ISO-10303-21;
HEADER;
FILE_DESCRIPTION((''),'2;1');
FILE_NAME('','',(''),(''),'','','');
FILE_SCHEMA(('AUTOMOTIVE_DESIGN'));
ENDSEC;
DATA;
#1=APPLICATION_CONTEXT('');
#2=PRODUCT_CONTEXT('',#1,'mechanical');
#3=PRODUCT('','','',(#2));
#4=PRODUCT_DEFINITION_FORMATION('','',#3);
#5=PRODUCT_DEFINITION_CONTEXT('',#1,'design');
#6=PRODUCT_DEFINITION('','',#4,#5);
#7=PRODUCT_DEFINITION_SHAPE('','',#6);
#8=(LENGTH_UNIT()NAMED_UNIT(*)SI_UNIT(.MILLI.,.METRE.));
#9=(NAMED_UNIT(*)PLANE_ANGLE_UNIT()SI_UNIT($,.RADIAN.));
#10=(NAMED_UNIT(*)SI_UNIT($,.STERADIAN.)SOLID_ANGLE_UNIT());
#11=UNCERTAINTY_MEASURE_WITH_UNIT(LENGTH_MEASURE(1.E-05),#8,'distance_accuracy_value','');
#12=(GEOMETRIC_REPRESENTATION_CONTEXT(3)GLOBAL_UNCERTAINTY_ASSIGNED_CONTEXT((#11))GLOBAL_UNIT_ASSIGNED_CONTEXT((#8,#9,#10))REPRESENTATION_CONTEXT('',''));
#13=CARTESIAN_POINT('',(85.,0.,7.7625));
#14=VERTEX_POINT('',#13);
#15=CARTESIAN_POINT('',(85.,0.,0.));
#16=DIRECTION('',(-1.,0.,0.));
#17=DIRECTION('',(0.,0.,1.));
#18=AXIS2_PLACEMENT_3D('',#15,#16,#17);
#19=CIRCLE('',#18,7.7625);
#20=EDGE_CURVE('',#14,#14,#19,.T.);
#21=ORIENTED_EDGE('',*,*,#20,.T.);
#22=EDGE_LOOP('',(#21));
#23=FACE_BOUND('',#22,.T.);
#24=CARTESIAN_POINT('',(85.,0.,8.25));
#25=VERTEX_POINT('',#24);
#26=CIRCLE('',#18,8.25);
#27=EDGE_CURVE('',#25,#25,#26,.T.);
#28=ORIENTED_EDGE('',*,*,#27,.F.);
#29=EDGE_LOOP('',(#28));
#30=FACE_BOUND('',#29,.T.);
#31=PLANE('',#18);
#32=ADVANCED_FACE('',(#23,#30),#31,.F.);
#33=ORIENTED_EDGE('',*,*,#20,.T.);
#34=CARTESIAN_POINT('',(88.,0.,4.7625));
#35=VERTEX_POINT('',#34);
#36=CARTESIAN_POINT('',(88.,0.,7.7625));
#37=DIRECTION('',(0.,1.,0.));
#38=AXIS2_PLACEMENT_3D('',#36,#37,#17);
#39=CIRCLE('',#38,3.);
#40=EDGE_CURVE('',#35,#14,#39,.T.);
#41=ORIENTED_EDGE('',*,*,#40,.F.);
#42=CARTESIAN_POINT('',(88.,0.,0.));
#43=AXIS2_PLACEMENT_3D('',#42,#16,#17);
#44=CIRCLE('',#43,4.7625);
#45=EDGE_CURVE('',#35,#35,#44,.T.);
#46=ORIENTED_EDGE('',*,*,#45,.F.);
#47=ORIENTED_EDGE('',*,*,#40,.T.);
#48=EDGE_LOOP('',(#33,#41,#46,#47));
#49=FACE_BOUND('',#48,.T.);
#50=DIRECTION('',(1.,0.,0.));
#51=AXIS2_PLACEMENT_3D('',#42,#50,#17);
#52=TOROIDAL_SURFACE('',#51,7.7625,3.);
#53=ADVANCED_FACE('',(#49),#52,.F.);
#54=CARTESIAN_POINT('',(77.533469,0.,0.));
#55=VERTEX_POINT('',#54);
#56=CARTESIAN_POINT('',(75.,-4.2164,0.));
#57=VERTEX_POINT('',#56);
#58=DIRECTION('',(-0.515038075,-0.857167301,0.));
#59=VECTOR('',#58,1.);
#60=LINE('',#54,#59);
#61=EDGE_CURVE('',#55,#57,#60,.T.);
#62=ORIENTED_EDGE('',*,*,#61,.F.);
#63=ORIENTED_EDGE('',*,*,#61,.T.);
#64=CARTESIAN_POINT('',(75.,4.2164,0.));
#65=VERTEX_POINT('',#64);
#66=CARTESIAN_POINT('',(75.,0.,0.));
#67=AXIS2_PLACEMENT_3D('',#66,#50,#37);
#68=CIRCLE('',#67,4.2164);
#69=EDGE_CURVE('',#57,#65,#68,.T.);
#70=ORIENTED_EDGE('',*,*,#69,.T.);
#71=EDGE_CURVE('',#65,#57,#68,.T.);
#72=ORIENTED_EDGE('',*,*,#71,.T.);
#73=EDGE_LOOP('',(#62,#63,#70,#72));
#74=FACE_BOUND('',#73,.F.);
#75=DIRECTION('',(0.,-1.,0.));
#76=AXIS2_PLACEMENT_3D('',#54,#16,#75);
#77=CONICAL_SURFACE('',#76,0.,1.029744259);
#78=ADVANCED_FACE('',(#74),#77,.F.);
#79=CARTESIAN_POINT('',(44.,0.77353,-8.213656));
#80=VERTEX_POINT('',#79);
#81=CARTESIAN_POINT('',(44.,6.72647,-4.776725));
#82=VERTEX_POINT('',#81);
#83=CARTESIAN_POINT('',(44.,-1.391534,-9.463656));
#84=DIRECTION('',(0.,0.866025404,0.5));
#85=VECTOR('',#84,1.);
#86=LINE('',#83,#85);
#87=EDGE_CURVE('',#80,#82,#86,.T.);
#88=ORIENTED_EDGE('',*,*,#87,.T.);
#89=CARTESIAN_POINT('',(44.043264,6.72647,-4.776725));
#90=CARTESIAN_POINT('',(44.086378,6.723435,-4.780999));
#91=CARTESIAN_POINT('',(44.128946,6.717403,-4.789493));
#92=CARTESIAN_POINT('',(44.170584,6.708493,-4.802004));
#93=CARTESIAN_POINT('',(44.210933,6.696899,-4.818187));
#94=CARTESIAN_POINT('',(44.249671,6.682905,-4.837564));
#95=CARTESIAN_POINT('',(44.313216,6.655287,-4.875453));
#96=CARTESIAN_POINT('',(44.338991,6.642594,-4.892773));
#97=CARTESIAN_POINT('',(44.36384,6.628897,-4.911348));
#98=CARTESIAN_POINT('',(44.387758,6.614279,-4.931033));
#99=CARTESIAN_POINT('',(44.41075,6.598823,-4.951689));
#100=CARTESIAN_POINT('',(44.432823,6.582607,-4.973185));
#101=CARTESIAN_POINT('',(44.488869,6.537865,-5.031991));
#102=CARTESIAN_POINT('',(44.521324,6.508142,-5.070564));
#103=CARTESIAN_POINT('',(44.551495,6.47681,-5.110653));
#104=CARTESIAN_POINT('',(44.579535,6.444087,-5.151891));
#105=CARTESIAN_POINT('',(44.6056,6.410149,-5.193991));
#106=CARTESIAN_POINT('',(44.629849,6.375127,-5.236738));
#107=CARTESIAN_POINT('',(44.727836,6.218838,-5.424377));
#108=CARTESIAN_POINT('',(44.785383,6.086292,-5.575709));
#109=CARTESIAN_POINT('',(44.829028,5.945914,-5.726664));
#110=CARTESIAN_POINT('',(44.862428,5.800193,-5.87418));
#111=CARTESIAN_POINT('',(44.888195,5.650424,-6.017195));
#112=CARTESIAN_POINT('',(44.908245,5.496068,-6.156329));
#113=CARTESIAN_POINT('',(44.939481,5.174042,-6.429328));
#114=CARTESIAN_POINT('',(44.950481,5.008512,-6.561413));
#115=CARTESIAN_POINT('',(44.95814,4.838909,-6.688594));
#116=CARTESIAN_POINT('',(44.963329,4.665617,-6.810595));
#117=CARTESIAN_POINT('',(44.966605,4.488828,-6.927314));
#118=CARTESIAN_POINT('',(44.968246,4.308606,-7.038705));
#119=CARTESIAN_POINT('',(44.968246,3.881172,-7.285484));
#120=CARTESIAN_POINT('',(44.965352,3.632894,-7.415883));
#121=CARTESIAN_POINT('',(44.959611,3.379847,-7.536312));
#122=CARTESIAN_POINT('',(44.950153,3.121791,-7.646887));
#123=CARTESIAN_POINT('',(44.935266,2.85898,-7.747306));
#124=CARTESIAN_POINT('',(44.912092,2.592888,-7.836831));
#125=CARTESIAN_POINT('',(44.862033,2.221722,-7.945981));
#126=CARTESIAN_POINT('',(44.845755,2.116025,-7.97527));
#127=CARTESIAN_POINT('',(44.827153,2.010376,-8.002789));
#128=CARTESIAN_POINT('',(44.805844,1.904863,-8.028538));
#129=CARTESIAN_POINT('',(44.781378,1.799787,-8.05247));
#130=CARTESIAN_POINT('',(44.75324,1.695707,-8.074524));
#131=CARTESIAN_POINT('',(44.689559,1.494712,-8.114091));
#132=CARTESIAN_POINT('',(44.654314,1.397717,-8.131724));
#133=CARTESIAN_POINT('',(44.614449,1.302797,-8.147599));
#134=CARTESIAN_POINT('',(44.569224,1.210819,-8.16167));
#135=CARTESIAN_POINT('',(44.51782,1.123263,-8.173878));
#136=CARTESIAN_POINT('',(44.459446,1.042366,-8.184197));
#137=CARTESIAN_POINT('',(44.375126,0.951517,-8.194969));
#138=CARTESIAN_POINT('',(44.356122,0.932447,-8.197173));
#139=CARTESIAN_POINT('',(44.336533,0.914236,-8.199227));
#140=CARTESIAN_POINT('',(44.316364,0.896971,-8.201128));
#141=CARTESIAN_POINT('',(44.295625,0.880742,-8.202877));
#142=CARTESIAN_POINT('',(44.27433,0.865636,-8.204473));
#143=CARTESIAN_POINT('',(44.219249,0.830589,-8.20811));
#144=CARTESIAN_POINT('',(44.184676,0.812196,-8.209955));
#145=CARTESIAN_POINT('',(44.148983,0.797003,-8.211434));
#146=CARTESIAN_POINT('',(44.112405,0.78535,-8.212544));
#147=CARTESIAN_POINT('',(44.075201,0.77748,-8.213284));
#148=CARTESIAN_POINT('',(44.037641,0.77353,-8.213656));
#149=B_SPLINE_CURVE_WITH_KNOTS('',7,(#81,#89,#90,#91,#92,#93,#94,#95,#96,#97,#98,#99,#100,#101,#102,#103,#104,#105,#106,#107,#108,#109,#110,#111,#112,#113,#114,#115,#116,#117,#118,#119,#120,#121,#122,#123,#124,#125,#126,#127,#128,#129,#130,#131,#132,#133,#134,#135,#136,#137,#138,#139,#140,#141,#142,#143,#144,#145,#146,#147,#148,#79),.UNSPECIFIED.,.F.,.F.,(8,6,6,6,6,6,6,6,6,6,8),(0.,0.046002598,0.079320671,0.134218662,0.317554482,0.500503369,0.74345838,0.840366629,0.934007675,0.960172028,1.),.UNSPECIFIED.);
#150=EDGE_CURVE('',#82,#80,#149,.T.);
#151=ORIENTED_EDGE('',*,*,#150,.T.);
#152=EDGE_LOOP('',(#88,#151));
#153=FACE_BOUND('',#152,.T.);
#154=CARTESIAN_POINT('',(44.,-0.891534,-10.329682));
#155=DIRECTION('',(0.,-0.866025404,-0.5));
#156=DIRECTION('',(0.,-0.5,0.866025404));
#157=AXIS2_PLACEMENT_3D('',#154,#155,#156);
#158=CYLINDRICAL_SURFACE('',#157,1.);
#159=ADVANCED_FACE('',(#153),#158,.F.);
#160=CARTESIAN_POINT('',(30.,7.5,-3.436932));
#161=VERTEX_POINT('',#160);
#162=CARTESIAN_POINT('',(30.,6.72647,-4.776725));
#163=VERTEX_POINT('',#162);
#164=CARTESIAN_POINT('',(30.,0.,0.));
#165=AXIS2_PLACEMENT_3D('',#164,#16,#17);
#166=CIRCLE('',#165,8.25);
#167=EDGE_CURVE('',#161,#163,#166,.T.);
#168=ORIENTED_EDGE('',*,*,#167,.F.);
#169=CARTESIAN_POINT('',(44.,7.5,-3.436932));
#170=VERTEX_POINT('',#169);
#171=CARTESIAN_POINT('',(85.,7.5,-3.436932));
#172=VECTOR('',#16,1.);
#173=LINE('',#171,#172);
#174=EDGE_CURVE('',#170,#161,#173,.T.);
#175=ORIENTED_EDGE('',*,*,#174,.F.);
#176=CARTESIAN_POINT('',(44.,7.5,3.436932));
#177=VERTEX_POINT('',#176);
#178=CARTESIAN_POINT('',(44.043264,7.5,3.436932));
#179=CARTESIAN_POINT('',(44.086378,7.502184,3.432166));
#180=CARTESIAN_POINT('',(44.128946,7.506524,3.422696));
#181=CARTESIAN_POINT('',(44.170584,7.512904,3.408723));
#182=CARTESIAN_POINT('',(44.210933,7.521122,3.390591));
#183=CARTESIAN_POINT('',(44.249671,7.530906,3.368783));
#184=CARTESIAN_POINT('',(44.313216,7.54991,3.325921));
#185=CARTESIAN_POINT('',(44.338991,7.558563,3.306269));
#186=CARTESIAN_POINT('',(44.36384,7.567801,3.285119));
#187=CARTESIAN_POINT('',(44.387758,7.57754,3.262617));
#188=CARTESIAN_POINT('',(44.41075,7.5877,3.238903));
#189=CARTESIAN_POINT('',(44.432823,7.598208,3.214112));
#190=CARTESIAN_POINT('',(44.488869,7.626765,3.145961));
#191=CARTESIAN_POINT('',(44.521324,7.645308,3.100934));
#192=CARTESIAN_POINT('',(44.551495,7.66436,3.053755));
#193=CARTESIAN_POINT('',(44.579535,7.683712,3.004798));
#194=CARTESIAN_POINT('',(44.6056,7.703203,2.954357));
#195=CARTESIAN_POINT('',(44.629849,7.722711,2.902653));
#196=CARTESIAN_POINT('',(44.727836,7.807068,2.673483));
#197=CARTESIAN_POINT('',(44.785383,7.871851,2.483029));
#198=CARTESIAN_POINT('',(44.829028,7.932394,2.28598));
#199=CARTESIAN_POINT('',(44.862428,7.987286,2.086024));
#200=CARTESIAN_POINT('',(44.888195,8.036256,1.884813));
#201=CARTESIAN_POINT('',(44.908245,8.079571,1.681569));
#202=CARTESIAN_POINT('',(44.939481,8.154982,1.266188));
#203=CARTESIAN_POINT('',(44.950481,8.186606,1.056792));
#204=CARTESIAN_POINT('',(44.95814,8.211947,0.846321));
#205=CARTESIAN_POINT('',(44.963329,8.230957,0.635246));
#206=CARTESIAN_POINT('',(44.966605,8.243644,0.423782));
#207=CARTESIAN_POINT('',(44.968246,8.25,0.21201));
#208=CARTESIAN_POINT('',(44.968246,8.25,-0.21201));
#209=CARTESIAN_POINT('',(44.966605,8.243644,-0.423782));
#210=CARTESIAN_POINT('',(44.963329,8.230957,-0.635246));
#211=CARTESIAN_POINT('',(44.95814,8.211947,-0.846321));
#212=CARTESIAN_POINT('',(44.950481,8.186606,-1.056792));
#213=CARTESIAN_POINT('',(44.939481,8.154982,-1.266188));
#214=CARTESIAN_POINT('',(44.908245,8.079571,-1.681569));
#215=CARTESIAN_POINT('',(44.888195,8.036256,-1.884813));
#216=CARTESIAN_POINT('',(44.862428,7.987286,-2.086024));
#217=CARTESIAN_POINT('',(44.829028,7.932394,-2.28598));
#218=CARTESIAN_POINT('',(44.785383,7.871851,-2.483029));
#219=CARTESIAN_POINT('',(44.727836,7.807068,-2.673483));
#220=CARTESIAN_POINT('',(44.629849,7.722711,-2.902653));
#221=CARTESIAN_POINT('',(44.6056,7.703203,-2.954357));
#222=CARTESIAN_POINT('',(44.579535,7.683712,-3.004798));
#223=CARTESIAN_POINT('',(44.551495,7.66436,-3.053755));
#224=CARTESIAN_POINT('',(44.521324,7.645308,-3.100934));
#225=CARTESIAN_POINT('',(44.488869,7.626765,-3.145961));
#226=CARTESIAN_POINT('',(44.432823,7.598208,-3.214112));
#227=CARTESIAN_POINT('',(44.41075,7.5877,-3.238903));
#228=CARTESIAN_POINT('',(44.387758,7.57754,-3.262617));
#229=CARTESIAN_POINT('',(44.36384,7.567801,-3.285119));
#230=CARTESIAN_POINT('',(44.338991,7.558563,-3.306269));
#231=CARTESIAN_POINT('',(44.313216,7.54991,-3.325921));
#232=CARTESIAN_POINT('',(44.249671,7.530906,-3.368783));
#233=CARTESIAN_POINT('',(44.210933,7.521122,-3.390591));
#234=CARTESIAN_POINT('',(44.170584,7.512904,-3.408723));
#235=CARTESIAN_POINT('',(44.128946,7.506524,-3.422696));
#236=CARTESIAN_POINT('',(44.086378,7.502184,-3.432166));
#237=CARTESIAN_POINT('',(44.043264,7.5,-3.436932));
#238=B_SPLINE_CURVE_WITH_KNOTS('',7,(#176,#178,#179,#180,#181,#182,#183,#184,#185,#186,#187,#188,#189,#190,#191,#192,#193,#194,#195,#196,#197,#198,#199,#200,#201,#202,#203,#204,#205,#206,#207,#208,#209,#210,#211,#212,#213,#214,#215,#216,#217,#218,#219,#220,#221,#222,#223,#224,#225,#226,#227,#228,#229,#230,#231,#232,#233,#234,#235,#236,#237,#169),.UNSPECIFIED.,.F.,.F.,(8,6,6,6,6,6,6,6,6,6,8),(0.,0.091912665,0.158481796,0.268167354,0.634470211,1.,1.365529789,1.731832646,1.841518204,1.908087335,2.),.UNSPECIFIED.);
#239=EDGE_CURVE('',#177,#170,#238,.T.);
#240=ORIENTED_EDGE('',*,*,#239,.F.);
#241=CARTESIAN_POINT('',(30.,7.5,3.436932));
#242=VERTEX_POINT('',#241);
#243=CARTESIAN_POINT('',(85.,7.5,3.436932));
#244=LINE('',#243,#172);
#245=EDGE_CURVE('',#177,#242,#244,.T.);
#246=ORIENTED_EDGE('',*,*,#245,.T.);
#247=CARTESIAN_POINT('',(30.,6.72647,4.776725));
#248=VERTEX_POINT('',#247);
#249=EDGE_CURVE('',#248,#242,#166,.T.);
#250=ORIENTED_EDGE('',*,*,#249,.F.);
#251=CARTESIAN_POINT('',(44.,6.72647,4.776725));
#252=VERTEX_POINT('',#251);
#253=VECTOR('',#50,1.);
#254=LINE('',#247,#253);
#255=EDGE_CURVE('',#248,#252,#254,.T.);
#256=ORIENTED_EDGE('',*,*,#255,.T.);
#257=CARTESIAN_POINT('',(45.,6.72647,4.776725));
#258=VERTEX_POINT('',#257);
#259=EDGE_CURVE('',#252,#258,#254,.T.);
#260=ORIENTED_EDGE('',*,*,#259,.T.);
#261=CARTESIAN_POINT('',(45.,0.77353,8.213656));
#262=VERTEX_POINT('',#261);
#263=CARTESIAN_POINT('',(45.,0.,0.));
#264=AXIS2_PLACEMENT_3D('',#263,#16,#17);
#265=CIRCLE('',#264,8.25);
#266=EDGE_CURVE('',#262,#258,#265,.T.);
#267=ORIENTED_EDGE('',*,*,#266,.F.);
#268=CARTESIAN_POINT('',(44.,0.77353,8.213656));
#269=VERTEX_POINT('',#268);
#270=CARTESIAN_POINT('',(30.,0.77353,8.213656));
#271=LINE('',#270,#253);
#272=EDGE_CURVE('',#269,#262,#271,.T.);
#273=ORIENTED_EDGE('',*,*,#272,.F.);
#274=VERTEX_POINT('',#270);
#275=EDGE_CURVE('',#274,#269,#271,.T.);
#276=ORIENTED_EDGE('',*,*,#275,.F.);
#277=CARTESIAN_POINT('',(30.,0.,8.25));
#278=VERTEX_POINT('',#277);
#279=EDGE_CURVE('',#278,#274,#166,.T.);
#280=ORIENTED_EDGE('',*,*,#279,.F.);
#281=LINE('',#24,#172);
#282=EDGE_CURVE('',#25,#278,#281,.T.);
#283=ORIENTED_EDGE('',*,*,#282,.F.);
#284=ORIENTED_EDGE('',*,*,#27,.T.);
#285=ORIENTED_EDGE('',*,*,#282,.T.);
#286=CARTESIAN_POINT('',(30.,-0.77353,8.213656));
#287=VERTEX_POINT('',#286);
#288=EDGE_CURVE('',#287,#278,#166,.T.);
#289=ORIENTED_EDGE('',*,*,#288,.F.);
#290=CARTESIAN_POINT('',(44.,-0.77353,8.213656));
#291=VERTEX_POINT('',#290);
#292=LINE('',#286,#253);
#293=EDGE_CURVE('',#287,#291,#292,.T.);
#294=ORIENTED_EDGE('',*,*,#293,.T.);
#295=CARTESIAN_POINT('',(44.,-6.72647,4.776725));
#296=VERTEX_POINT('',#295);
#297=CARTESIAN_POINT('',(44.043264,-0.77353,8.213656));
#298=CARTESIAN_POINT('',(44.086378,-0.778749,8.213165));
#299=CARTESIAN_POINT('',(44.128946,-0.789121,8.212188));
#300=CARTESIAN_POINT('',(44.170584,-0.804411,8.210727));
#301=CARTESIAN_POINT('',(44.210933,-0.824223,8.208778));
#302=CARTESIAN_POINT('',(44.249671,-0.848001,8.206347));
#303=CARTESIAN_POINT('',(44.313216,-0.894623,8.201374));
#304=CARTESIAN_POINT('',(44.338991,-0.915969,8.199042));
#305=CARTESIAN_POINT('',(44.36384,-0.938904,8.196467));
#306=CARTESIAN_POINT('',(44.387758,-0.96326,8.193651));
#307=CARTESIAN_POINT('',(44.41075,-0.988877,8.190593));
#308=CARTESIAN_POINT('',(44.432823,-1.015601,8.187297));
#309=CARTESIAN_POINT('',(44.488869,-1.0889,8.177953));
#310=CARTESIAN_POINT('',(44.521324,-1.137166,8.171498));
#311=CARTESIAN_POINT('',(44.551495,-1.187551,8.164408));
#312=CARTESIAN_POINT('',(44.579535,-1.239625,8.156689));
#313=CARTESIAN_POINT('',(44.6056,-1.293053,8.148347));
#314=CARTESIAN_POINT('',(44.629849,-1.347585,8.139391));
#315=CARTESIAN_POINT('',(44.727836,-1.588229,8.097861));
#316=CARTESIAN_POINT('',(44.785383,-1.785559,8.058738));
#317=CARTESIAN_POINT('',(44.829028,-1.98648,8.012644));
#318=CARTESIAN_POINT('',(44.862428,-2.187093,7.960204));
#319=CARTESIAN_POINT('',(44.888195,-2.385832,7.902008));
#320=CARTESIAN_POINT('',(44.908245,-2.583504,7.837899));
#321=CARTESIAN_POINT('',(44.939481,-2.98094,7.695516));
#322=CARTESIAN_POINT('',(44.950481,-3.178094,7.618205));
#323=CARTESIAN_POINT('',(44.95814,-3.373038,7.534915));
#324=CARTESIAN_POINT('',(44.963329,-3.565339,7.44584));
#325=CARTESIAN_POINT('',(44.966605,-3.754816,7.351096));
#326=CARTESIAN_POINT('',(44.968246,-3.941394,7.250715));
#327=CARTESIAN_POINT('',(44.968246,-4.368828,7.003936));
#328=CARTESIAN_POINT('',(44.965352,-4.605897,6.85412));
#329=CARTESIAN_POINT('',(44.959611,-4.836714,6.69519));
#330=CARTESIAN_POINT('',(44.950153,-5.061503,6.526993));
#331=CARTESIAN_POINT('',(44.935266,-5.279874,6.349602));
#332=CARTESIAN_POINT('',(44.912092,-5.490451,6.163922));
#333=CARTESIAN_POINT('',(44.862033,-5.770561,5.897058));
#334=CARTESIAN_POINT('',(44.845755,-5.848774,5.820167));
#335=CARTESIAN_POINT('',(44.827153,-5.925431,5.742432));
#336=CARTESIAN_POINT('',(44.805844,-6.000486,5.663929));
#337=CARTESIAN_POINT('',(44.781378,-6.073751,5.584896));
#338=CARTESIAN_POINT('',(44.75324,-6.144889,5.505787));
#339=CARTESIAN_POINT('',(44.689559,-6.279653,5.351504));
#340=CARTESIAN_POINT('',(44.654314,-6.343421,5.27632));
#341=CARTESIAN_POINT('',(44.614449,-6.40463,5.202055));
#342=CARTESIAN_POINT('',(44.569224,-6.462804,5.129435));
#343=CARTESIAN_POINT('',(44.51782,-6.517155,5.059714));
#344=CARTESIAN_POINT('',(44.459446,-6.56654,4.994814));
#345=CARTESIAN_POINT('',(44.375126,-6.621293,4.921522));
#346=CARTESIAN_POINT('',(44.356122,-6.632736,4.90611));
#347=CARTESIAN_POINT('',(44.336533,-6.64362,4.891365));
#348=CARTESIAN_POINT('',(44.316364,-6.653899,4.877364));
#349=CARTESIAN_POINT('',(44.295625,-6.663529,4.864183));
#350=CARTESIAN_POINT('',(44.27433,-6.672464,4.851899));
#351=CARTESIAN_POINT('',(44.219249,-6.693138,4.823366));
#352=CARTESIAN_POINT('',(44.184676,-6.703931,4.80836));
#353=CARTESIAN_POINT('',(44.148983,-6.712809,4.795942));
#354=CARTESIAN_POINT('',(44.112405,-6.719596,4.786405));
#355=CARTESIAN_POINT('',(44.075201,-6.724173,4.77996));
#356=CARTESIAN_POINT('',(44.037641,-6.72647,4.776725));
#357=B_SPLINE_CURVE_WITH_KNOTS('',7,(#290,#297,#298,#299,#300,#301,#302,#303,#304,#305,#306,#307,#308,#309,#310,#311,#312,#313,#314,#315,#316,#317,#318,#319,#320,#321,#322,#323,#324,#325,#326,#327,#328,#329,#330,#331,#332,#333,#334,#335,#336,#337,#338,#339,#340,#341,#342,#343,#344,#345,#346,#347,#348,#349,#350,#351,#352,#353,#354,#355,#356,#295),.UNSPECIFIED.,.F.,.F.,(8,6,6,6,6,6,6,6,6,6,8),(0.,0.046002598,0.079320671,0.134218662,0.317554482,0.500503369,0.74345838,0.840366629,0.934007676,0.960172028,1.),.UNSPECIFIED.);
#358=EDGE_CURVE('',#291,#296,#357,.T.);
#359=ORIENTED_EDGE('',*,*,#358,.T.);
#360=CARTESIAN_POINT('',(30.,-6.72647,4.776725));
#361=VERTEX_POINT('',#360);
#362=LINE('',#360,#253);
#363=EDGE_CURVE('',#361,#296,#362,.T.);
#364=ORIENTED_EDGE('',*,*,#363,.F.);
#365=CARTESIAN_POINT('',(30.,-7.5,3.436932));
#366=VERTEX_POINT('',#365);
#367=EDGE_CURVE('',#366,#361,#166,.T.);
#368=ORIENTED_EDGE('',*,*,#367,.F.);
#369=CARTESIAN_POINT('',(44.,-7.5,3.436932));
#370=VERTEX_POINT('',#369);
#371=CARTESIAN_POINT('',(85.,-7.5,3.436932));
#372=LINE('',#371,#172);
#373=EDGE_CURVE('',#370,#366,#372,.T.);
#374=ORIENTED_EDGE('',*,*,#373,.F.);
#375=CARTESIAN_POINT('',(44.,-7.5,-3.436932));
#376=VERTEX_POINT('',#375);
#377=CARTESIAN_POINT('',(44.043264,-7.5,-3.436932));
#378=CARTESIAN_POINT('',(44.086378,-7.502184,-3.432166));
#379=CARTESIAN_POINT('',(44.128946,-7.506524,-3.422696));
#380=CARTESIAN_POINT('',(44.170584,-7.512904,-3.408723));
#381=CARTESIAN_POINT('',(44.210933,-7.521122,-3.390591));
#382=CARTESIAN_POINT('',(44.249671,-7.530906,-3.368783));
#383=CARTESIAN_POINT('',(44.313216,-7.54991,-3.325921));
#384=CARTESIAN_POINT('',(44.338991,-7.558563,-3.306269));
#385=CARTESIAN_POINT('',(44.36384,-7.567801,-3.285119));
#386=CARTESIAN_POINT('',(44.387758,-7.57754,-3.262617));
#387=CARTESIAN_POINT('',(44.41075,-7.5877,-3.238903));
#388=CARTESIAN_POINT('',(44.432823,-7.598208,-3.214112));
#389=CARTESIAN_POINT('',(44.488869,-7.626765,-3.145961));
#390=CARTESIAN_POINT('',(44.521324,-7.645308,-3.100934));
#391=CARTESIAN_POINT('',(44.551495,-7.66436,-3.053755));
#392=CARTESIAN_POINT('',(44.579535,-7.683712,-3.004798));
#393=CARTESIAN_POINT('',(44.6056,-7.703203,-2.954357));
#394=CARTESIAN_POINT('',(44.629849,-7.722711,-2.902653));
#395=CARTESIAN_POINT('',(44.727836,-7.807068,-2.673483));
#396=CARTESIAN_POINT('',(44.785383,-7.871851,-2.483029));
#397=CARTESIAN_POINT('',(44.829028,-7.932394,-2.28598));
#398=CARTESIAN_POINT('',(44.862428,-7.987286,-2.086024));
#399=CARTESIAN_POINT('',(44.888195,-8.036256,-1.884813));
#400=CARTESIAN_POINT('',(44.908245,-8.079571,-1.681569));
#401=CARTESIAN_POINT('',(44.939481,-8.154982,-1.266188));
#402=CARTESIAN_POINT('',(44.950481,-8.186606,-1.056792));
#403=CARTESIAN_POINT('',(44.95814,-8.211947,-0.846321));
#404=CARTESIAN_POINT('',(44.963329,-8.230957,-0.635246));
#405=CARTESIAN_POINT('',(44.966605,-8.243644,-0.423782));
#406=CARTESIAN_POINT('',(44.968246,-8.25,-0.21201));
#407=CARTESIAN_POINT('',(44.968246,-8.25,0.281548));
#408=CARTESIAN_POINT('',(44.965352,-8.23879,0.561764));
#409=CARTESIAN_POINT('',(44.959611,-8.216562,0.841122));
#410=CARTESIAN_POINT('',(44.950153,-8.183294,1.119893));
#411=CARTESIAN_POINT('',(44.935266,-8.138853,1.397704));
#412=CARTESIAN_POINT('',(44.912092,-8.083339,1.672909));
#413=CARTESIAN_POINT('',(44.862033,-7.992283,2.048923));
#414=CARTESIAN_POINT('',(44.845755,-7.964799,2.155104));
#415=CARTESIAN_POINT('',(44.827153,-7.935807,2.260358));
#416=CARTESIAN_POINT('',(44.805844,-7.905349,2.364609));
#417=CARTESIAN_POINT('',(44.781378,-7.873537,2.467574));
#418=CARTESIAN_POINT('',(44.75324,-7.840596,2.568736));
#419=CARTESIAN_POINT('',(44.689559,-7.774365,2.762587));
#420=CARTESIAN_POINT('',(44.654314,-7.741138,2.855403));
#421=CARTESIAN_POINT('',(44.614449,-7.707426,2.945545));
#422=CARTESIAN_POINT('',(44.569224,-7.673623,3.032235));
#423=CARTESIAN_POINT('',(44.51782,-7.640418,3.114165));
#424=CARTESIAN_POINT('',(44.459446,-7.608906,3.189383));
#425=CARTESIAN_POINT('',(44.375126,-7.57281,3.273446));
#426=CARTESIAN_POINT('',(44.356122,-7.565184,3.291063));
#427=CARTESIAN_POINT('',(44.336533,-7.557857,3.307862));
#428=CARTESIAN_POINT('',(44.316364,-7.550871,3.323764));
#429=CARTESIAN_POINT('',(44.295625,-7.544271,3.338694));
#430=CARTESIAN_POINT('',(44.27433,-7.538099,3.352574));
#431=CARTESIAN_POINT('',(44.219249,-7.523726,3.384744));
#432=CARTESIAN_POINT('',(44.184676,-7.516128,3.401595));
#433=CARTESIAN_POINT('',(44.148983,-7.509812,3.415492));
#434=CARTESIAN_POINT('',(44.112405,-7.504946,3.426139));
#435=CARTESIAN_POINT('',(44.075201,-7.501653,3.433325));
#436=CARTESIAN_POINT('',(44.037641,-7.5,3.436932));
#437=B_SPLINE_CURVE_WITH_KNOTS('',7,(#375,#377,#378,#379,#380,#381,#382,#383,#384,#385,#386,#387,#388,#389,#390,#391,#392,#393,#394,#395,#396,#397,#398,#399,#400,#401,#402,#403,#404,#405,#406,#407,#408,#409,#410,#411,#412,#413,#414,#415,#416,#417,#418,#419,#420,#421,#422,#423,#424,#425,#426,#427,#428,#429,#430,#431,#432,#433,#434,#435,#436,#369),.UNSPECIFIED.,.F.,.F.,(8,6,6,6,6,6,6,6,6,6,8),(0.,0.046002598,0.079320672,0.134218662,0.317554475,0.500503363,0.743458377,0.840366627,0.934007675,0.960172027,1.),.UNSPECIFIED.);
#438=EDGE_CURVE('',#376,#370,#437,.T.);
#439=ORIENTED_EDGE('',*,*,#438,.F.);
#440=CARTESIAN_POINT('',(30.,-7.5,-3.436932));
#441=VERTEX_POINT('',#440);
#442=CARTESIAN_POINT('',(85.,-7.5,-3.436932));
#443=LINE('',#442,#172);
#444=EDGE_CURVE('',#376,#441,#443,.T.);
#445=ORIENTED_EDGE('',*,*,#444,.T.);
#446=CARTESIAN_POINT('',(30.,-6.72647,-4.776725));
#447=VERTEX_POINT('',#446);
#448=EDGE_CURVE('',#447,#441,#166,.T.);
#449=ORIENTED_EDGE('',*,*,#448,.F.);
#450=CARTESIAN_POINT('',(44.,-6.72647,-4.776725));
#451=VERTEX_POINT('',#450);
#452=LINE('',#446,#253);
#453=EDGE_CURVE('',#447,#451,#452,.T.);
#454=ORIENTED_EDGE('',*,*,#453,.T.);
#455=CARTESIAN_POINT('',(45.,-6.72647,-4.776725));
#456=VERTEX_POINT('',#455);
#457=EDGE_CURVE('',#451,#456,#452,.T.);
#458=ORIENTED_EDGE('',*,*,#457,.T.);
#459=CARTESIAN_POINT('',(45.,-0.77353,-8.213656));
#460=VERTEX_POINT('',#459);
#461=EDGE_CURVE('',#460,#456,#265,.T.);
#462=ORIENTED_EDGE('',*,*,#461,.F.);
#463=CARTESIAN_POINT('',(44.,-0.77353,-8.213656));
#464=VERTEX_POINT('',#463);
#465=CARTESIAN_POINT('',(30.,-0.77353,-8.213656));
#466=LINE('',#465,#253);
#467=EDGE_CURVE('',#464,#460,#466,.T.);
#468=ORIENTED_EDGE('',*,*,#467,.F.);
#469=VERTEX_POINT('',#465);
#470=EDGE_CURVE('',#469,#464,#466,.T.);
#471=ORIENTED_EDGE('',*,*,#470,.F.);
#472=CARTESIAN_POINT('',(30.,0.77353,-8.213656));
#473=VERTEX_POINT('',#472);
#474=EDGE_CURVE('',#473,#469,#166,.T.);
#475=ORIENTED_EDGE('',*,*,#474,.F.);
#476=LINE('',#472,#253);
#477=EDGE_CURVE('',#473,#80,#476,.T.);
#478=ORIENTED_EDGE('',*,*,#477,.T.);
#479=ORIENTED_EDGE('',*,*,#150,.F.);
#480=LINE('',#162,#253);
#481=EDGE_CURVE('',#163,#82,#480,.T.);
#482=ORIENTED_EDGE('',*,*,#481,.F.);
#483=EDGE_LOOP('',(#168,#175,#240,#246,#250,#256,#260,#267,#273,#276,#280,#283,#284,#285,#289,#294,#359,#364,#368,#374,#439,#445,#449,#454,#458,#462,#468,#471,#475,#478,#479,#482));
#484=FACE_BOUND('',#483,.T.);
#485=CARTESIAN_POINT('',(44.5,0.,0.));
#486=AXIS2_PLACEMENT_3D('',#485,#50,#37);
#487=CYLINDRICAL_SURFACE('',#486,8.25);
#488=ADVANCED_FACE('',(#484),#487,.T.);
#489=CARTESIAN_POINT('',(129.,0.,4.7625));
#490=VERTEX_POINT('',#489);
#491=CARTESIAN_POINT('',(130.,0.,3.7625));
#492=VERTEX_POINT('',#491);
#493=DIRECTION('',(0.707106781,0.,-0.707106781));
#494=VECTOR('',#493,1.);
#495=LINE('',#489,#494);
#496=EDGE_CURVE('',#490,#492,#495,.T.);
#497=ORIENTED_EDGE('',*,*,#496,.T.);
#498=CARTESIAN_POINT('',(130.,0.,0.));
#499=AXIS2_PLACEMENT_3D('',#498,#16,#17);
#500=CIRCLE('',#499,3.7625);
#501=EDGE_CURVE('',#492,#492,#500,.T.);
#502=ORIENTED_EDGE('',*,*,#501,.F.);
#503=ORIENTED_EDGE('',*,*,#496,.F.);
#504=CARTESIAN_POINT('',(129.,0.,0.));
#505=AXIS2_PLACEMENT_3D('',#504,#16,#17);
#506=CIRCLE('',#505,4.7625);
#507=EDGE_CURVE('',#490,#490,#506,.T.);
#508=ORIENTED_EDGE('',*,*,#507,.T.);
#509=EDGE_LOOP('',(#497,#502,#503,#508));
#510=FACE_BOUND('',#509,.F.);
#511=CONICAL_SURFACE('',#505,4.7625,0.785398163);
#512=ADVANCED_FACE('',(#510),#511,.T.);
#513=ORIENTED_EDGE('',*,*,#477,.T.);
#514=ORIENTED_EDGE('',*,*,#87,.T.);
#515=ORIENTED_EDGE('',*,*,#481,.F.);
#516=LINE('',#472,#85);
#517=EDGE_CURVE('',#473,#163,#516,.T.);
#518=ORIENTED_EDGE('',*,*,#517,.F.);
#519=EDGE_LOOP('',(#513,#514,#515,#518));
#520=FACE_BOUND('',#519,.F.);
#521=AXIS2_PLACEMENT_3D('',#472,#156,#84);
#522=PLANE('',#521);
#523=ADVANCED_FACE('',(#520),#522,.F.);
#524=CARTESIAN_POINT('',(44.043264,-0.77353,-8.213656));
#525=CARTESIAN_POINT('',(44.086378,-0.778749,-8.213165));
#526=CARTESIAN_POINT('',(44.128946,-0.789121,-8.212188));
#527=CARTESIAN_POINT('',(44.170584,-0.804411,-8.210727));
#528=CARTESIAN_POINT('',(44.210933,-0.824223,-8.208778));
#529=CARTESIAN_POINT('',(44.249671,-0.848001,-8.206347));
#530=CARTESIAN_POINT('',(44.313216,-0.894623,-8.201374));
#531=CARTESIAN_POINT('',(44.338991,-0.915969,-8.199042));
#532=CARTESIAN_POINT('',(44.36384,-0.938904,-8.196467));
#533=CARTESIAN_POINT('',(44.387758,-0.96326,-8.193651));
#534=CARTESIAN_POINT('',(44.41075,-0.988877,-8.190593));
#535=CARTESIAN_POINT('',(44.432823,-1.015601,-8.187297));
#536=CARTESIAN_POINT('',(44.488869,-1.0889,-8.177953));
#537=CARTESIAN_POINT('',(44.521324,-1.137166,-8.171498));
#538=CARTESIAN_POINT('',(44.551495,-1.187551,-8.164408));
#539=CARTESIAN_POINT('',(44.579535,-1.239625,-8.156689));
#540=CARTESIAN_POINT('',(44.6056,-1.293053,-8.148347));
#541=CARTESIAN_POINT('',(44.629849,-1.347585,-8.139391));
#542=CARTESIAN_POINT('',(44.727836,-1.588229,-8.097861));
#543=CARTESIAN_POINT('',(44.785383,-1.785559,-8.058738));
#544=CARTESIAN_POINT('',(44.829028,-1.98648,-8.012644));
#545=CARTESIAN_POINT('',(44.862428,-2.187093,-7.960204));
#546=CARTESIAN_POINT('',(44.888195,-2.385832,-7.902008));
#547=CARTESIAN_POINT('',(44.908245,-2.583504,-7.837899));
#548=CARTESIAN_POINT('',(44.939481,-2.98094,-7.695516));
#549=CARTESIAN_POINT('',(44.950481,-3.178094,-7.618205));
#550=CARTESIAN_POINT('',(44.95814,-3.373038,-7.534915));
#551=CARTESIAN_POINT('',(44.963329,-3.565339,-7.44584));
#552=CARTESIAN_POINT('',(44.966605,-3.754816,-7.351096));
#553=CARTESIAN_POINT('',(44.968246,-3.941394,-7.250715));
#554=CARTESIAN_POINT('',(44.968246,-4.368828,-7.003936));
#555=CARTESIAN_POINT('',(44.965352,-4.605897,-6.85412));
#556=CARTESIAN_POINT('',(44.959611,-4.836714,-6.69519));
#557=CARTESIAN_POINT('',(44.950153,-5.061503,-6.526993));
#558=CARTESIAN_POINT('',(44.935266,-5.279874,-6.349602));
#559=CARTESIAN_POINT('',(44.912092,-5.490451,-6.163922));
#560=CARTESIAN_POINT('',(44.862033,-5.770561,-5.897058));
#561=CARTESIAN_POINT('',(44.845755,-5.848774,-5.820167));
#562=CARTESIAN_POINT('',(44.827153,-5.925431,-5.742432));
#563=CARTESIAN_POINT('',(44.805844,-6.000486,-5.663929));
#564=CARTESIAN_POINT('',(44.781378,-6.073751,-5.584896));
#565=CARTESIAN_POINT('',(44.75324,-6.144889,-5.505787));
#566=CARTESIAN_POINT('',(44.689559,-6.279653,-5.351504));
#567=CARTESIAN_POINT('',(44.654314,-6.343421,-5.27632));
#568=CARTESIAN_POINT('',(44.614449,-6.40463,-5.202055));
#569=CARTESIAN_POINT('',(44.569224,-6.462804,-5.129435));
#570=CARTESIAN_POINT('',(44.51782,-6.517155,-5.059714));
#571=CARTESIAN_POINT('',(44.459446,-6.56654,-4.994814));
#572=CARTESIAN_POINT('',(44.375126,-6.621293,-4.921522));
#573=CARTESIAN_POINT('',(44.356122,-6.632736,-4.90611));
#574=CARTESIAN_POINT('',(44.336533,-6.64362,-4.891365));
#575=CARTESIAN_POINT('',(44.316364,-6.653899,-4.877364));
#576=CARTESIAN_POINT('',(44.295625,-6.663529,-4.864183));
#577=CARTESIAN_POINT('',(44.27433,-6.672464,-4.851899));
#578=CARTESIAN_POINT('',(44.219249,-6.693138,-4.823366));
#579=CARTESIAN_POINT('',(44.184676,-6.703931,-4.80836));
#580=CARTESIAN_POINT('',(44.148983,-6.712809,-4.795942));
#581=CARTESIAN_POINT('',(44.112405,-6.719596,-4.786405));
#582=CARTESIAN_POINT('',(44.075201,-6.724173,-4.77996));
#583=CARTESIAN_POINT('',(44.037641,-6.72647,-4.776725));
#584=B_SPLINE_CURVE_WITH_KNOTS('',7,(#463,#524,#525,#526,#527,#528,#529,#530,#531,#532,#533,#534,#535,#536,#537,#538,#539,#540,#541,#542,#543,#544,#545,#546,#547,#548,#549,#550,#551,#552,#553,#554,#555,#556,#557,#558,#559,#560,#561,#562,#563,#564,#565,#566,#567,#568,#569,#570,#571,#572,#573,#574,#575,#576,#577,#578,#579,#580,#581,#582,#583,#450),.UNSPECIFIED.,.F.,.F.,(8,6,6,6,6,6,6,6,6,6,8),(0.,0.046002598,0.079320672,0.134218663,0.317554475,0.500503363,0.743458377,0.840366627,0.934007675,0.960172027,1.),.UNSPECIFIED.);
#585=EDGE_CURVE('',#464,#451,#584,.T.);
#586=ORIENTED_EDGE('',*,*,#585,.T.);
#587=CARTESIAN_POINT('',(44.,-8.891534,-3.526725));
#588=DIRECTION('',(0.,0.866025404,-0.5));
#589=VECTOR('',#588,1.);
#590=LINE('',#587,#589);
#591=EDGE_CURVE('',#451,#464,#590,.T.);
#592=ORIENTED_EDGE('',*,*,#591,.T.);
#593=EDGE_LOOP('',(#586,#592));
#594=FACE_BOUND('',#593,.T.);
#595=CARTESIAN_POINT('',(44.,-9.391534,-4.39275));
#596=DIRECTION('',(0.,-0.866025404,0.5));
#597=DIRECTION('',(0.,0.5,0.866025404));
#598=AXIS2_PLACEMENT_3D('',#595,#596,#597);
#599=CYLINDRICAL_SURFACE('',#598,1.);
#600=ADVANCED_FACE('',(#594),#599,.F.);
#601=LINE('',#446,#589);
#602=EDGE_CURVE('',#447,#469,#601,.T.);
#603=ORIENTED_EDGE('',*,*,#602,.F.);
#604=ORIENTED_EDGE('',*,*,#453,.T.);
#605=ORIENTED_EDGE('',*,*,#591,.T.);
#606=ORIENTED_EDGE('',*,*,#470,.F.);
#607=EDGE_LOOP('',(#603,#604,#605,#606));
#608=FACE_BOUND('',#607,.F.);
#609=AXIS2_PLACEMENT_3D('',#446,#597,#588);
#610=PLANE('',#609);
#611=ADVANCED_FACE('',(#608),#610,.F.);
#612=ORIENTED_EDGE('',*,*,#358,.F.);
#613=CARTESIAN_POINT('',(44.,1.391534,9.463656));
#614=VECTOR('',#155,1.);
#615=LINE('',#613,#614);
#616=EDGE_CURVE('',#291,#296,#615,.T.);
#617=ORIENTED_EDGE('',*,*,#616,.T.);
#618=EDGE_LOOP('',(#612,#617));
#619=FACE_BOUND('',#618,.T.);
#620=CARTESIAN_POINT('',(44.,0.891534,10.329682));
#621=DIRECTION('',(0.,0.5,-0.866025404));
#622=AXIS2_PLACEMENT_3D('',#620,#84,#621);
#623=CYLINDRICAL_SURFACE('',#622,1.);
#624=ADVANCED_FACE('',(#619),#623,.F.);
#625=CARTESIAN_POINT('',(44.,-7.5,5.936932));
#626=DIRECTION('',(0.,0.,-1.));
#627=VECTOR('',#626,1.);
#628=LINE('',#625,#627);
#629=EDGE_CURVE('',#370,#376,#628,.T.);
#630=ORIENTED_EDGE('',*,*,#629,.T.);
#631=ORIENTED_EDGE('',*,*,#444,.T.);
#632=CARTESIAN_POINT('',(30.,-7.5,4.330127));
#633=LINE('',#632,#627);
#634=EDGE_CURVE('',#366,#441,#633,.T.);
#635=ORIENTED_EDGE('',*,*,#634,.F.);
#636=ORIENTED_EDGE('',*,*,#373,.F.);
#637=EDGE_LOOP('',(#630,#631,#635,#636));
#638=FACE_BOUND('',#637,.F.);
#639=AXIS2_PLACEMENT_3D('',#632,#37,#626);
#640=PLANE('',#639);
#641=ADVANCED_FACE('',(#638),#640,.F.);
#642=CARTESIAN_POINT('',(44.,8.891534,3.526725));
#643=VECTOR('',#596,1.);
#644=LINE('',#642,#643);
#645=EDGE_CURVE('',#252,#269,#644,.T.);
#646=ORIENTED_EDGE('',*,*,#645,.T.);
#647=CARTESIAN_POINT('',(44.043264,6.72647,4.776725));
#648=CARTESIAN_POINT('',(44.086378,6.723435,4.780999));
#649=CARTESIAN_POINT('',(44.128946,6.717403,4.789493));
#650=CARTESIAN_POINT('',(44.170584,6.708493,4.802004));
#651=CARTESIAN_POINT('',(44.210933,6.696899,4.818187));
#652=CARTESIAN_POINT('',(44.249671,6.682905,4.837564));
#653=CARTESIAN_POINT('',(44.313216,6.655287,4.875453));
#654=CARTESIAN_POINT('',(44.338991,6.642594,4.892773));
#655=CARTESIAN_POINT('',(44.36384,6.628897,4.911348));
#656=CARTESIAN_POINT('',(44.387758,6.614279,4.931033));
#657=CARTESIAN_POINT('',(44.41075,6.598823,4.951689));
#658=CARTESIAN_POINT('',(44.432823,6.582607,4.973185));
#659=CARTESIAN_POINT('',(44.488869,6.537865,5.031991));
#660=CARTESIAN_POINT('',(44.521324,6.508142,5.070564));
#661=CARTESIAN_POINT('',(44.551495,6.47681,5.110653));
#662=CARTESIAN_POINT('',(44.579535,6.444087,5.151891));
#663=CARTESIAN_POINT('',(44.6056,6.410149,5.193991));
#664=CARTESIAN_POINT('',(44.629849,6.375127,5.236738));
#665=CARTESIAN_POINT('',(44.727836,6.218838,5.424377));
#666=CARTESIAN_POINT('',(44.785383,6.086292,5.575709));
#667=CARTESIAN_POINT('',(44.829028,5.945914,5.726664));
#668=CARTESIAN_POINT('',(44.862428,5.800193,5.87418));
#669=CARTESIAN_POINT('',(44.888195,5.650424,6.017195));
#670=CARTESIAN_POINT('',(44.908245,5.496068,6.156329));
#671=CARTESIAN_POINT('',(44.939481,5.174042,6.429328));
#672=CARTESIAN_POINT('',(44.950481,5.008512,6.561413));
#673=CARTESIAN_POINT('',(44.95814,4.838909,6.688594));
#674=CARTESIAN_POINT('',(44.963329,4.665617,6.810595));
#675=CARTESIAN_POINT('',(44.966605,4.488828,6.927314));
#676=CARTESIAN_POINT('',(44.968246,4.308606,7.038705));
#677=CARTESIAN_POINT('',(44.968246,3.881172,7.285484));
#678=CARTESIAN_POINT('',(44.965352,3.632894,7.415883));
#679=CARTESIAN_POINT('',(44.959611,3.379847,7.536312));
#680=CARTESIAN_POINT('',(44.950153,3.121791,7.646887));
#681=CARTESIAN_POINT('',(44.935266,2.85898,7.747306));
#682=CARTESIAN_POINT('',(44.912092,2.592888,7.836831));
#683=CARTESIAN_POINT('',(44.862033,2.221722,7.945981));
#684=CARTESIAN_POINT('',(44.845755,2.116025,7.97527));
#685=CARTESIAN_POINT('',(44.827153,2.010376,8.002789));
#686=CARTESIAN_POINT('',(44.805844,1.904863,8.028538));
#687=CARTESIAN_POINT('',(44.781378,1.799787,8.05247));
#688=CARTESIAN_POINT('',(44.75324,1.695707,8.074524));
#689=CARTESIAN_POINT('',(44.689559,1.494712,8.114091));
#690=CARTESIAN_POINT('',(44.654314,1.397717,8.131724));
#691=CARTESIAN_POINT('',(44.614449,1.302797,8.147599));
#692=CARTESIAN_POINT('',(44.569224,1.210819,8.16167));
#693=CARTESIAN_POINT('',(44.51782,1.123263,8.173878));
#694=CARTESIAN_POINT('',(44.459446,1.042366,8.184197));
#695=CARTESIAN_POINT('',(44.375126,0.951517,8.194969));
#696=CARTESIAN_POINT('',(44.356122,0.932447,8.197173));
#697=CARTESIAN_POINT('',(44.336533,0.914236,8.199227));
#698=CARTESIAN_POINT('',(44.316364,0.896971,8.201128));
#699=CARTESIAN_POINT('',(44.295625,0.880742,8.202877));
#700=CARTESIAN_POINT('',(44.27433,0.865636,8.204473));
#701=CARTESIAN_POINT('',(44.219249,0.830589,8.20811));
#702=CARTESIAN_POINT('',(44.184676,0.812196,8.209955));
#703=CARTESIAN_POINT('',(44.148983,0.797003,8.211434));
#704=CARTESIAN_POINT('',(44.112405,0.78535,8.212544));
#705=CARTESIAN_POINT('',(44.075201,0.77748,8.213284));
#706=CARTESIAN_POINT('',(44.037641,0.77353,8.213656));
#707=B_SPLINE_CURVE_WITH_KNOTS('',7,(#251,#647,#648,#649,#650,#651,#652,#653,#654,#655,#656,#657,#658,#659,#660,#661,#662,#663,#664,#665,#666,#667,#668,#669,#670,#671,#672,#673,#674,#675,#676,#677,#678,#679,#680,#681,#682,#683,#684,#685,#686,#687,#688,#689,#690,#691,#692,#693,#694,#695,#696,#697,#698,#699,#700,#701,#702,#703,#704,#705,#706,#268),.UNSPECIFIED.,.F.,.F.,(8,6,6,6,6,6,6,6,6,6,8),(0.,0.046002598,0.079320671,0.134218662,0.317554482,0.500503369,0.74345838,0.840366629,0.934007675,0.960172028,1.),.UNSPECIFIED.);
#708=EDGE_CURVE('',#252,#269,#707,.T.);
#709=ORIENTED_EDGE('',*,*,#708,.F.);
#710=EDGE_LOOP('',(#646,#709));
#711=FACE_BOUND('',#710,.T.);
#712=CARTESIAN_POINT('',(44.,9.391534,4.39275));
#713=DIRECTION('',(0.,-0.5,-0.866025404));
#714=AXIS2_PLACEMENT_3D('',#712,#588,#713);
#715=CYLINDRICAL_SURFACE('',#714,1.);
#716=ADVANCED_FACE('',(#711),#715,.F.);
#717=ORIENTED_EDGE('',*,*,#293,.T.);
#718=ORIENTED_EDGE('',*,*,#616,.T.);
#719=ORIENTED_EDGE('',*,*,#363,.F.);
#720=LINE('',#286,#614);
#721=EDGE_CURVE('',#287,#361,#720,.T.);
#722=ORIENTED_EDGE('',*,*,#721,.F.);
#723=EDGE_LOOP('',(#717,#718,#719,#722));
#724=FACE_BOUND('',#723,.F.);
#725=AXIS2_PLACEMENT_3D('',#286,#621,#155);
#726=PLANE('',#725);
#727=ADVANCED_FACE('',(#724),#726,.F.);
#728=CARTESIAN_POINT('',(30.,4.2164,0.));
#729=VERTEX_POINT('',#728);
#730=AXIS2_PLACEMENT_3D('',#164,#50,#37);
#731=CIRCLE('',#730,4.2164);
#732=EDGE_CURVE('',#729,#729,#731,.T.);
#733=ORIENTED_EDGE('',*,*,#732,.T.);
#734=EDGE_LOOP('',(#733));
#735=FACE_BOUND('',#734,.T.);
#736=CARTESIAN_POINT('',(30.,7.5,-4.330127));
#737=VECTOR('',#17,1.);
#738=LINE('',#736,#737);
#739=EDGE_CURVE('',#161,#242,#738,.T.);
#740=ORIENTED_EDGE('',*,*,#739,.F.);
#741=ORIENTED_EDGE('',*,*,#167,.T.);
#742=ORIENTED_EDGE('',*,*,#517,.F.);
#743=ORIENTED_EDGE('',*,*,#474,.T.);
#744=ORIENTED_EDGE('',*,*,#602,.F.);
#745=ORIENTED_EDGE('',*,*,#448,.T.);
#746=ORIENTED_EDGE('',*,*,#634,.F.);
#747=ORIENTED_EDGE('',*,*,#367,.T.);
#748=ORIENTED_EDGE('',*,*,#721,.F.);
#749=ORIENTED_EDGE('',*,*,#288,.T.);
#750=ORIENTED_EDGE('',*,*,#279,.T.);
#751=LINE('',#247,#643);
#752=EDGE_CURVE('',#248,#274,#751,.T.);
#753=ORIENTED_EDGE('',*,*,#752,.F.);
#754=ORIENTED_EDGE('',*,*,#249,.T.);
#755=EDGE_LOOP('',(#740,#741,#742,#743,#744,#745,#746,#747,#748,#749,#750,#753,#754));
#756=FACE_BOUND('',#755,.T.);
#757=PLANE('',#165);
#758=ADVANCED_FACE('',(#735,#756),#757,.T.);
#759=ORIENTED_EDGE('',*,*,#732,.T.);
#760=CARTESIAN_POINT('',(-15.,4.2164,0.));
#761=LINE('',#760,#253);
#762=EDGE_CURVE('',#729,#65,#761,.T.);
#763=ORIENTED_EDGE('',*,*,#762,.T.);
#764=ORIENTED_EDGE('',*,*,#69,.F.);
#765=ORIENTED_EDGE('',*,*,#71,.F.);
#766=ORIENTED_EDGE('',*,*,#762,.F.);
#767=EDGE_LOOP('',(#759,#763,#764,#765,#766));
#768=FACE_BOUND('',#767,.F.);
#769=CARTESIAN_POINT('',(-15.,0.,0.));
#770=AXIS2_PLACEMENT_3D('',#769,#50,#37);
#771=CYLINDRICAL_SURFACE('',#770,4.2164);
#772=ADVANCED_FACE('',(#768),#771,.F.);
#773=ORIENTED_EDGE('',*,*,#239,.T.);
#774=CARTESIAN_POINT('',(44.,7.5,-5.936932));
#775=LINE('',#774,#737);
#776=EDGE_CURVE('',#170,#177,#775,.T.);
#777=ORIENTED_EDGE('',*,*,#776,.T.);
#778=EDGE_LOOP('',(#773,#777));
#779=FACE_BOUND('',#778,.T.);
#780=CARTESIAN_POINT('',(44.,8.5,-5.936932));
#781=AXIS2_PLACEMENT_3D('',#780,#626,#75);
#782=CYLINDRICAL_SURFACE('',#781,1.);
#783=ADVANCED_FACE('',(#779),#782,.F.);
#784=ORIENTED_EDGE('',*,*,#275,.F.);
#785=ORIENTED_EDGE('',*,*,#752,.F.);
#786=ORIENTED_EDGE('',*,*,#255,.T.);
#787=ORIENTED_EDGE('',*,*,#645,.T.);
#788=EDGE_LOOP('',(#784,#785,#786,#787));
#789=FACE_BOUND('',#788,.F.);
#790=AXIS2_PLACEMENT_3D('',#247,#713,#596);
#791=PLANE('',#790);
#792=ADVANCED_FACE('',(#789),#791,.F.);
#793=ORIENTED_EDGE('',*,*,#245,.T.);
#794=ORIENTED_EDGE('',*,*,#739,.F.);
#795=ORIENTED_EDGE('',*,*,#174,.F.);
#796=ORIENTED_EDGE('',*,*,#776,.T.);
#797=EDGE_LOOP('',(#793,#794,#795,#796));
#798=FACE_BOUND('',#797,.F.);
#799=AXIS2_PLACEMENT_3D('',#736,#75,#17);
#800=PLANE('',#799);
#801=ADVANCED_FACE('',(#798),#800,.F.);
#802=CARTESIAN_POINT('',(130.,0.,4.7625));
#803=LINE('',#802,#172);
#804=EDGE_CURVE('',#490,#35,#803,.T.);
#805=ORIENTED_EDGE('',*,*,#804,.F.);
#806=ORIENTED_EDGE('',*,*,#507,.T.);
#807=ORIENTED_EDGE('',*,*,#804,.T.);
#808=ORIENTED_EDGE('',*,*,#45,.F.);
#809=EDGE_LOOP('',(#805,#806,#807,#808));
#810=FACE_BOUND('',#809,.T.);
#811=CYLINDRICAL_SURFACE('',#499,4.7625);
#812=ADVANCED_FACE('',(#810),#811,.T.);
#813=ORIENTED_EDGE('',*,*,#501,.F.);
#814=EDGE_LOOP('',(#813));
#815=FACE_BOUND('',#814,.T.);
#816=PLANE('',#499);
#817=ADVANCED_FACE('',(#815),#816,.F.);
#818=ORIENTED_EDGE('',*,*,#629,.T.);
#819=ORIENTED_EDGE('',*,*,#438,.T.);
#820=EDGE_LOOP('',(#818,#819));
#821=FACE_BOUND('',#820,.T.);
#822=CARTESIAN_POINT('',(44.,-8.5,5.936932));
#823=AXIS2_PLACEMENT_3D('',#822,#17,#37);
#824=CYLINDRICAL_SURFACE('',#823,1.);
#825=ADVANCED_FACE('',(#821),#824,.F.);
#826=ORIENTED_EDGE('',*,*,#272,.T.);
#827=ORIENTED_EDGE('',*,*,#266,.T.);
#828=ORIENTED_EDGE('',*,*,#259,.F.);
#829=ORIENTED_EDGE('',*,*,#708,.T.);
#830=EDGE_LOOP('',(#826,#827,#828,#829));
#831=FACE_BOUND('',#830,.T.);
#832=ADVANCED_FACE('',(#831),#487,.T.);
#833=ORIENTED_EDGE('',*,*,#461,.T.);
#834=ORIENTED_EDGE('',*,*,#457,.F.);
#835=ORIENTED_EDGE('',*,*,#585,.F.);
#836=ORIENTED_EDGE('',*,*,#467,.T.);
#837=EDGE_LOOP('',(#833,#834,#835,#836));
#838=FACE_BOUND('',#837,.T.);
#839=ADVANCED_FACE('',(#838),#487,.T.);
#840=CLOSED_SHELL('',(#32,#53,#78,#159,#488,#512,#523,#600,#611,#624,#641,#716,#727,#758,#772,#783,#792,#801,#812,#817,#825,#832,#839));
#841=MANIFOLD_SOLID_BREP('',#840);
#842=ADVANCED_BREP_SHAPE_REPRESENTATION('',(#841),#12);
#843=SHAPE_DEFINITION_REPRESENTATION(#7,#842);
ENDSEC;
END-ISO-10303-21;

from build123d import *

# Parameters (mm, degrees)
F3_D         = 8.4328
F3_DEPTH     = 45
F3_TIP       = 2.5334687141
F2_R         = 25
F4_DEPTH     = 15
F5_T4_DEPTH  = 11.8738635424
F5_S5_R      = 8.25
F5_T6_DEPTH  = 8
F5_T10_DEPTH = 11.8738635424
F5_S11_R     = 8.25
F5_T12_DEPTH = 7
F5_T16_DEPTH = 11.8738635424
F5_S17_R     = 8.25
F5_T18_DEPTH = 8
F5_T22_DEPTH = 11.8738635424
F5_S23_R     = 8.25
F5_T24_DEPTH = 7
F5_T28_DEPTH = 11.8738635424
F5_S29_R     = 8.25
F5_T30_DEPTH = 8
F5_T34_DEPTH = 11.8738635424
F5_S35_R     = 8.25
F5_T36_DEPTH = 8
F6_SIZE      = 1
F7_R         = 3


# Not quite as in the source:
# - a fillet or chamfer that OpenCascade refuses, or shapes differently, is made with other operations: its cross-section is extruded or revolved along the edge and cut away or added


with BuildPart() as f1:
    # F0 (on Front) → F1 (revolve)
    with BuildSketch(Plane.XZ):
        Polygon((30, 8.25), (30, 0), (130, 0), (130, 4.7625), (85, 4.7625), (85, 8.25), align=None)
    revolve(axis=Axis((80, 0, 0), (-1, 0, 0)))

    # F3
    with Locations(Plane(origin=(30, 0, 0), x_dir=(0, -1, 0), z_dir=(-1, 0, 0))):
        with Locations((0, 0)):
            Hole(F3_D / 2, depth=F3_DEPTH)
            with Locations((0, 0, -(F3_DEPTH + F3_TIP / 2))):  # 118° drill point
                Cone(0, F3_D / 2, F3_TIP, mode=Mode.SUBTRACT)

    # F2 (on face) → F4 (cut)
    with BuildSketch(Plane(origin=(30, 0, 0), x_dir=(0, -1, 0), z_dir=(-1, 0, 0))):
        Circle(F2_R)
        with BuildLine():
            Line((6.7264702249, 4.7767246428), (7.5, 4.3301270189))
            Line((7.5, 4.3301270189), (7.5, 3.4369317712))
            ThreePointArc((7.5, 3.4369317712), (8.0603194726, 1.7589059099), (8.25, 0))
            ThreePointArc((8.25, 0), (8.0603194726, -1.7589059099), (7.5, -3.4369317712))
            Line((7.5, -3.4369317712), (7.5, -4.3301270189))
            Line((7.5, -4.3301270189), (6.7264702249, -4.7767246428))
            ThreePointArc((6.7264702249, -4.7767246428), (4.125, -7.1447095812), (0.7735297751, -8.213656414))
            Line((0.7735297751, -8.213656414), (0, -8.6602540378))
            Line((0, -8.6602540378), (-0.7735297751, -8.213656414))
            ThreePointArc((-0.7735297751, -8.213656414), (-4.125, -7.1447095812), (-6.7264702249, -4.7767246428))
            Line((-6.7264702249, -4.7767246428), (-7.5, -4.3301270189))
            Line((-7.5, -4.3301270189), (-7.5, -3.4369317712))
            ThreePointArc((-7.5, -3.4369317712), (-8.25, 0), (-7.5, 3.4369317712))
            Line((-7.5, 3.4369317712), (-7.5, 4.3301270189))
            Line((-7.5, 4.3301270189), (-6.7264702249, 4.7767246428))
            ThreePointArc((-6.7264702249, 4.7767246428), (-4.125, 7.1447095812), (-0.7735297751, 8.213656414))
            Line((-0.7735297751, 8.213656414), (0, 8.6602540378))
            Line((0, 8.6602540378), (0.7735297751, 8.213656414))
            ThreePointArc((0.7735297751, 8.213656414), (4.125, 7.1447095812), (6.7264702249, 4.7767246428))
        make_face(mode=Mode.SUBTRACT)
        with BuildLine():
            ThreePointArc((8.25, 0), (8.0603194726, 1.7589059099), (7.5, 3.4369317712))
            Line((7.5, 3.4369317712), (7.5, -3.4369317712))
            ThreePointArc((7.5, -3.4369317712), (8.0603194726, -1.7589059099), (8.25, 0))
        make_face()
        with BuildLine():
            Line((0.7735297751, 8.213656414), (6.7264702249, 4.7767246428))
            ThreePointArc((6.7264702249, 4.7767246428), (4.125, 7.1447095812), (0.7735297751, 8.213656414))
        make_face()
        with BuildLine():
            ThreePointArc((0.7735297751, -8.213656414), (4.125, -7.1447095812), (6.7264702249, -4.7767246428))
            Line((6.7264702249, -4.7767246428), (0.7735297751, -8.213656414))
        make_face()
        with BuildLine():
            Line((-6.7264702249, 4.7767246428), (-0.7735297751, 8.213656414))
            ThreePointArc((-0.7735297751, 8.213656414), (-4.125, 7.1447095812), (-6.7264702249, 4.7767246428))
        make_face()
        with BuildLine():
            ThreePointArc((-6.7264702249, -4.7767246428), (-4.125, -7.1447095812), (-0.7735297751, -8.213656414))
            Line((-0.7735297751, -8.213656414), (-6.7264702249, -4.7767246428))
        make_face()
        with BuildLine():
            Line((-7.5, -3.4369317712), (-7.5, 3.4369317712))
            ThreePointArc((-7.5, 3.4369317712), (-8.25, 0), (-7.5, -3.4369317712))
        make_face()
    extrude(amount=-F4_DEPTH, mode=Mode.SUBTRACT)

    # F5: fillet of radius 1 on 6 edges, made by hand


with BuildPart() as f5_tool2:
    # F5_s3 → F5_t4 (new body)
    with BuildSketch(Plane(origin=(0, 5.1415337344, 2.9684658856), x_dir=(1, 0, 0), z_dir=(0, -0.8660254038, -0.5))):
        with BuildLine():
            ThreePointArc((44, 7.5), (44.7071067812, 7.7928932188), (45, 8.5))
            Line((45, 8.5), (45, 7.5))
            Line((45, 7.5), (44, 7.5))
        make_face()
    extrude(amount=F5_T4_DEPTH)

    # F5_s5 → F5_t6 (intersect, symmetric)
    with BuildSketch(Plane.YZ.offset(44.5)):
        Circle(F5_S5_R)
    extrude(amount=F5_T6_DEPTH, both=True, mode=Mode.INTERSECT)


with BuildPart() as f1_1:
    add(f1.part)

    # F5_t1: union F5_tool2
    add(f5_tool2.part)


with BuildPart() as f5_tool8:
    # F5_s9 → F5_t10 (new body)
    with BuildSketch(Plane.XY.offset(5.9369317712)):
        with BuildLine():
            ThreePointArc((44, -7.5), (44.7071067812, -7.7928932188), (45, -8.5))
            Line((45, -8.5), (45, -7.5))
            Line((45, -7.5), (44, -7.5))
        make_face()
    extrude(amount=-F5_T10_DEPTH)

    # F5_s11 → F5_t12 (intersect, symmetric)
    with BuildSketch(Plane.YZ.offset(44.5)):
        Circle(F5_S11_R)
    extrude(amount=F5_T12_DEPTH, both=True, mode=Mode.INTERSECT)


with BuildPart() as f1_2:
    add(f1_1.part)

    # F5_t7: union F5_tool8
    add(f5_tool8.part)


with BuildPart() as f5_tool14:
    # F5_s15 → F5_t16 (new body)
    with BuildSketch(Plane(origin=(0, 5.1415337344, -2.9684658856), x_dir=(1, 0, 0), z_dir=(0, -0.8660254038, 0.5))):
        with BuildLine():
            ThreePointArc((44, 7.5), (44.7071067812, 7.7928932188), (45, 8.5))
            Line((45, 8.5), (45, 7.5))
            Line((45, 7.5), (44, 7.5))
        make_face()
    extrude(amount=F5_T16_DEPTH)

    # F5_s17 → F5_t18 (intersect, symmetric)
    with BuildSketch(Plane.YZ.offset(44.5)):
        Circle(F5_S17_R)
    extrude(amount=F5_T18_DEPTH, both=True, mode=Mode.INTERSECT)


with BuildPart() as f1_3:
    add(f1_2.part)

    # F5_t13: union F5_tool14
    add(f5_tool14.part)


with BuildPart() as f5_tool20:
    # F5_s21 → F5_t22 (new body)
    with BuildSketch(Plane.XY.offset(-5.9369317712)):
        with BuildLine():
            ThreePointArc((44, 7.5), (44.7071067812, 7.7928932188), (45, 8.5))
            Line((45, 8.5), (45, 7.5))
            Line((45, 7.5), (44, 7.5))
        make_face()
    extrude(amount=F5_T22_DEPTH)

    # F5_s23 → F5_t24 (intersect, symmetric)
    with BuildSketch(Plane.YZ.offset(44.5)):
        Circle(F5_S23_R)
    extrude(amount=F5_T24_DEPTH, both=True, mode=Mode.INTERSECT)


with BuildPart() as f1_4:
    add(f1_3.part)

    # F5_t19: union F5_tool20
    add(f5_tool20.part)


with BuildPart() as f5_tool26:
    # F5_s27 → F5_t28 (new body)
    with BuildSketch(Plane(origin=(0, -5.1415337344, -2.9684658856), x_dir=(1, 0, 0), z_dir=(0, 0.8660254038, 0.5))):
        with BuildLine():
            ThreePointArc((44, 7.5), (44.7071067812, 7.7928932188), (45, 8.5))
            Line((45, 8.5), (45, 7.5))
            Line((45, 7.5), (44, 7.5))
        make_face()
    extrude(amount=F5_T28_DEPTH)

    # F5_s29 → F5_t30 (intersect, symmetric)
    with BuildSketch(Plane.YZ.offset(44.5)):
        Circle(F5_S29_R)
    extrude(amount=F5_T30_DEPTH, both=True, mode=Mode.INTERSECT)


with BuildPart() as f1_5:
    add(f1_4.part)

    # F5_t25: union F5_tool26
    add(f5_tool26.part)


with BuildPart() as f5_tool32:
    # F5_s33 → F5_t34 (new body)
    with BuildSketch(Plane(origin=(0, -5.1415337344, 2.9684658856), x_dir=(1, 0, 0), z_dir=(0, 0.8660254038, -0.5))):
        with BuildLine():
            ThreePointArc((44, 7.5), (44.7071067812, 7.7928932188), (45, 8.5))
            Line((45, 8.5), (45, 7.5))
            Line((45, 7.5), (44, 7.5))
        make_face()
    extrude(amount=F5_T34_DEPTH)

    # F5_s35 → F5_t36 (intersect, symmetric)
    with BuildSketch(Plane.YZ.offset(44.5)):
        Circle(F5_S35_R)
    extrude(amount=F5_T36_DEPTH, both=True, mode=Mode.INTERSECT)


with BuildPart() as f1_6:
    add(f1_5.part)

    # F5_t31: union F5_tool32
    add(f5_tool32.part)

    # F6
    f6_edges = [f1_6.edges().sort_by_distance(p)[0] for p in [
        (130, 0, -4.7625),
    ]]
    chamfer(f6_edges, length=F6_SIZE)

    # F7
    f7_edges = [f1_6.edges().sort_by_distance(p)[0] for p in [
        (85, 0, -4.7625),
    ]]
    fillet(f7_edges, radius=F7_R)


solid = f1_6.part
